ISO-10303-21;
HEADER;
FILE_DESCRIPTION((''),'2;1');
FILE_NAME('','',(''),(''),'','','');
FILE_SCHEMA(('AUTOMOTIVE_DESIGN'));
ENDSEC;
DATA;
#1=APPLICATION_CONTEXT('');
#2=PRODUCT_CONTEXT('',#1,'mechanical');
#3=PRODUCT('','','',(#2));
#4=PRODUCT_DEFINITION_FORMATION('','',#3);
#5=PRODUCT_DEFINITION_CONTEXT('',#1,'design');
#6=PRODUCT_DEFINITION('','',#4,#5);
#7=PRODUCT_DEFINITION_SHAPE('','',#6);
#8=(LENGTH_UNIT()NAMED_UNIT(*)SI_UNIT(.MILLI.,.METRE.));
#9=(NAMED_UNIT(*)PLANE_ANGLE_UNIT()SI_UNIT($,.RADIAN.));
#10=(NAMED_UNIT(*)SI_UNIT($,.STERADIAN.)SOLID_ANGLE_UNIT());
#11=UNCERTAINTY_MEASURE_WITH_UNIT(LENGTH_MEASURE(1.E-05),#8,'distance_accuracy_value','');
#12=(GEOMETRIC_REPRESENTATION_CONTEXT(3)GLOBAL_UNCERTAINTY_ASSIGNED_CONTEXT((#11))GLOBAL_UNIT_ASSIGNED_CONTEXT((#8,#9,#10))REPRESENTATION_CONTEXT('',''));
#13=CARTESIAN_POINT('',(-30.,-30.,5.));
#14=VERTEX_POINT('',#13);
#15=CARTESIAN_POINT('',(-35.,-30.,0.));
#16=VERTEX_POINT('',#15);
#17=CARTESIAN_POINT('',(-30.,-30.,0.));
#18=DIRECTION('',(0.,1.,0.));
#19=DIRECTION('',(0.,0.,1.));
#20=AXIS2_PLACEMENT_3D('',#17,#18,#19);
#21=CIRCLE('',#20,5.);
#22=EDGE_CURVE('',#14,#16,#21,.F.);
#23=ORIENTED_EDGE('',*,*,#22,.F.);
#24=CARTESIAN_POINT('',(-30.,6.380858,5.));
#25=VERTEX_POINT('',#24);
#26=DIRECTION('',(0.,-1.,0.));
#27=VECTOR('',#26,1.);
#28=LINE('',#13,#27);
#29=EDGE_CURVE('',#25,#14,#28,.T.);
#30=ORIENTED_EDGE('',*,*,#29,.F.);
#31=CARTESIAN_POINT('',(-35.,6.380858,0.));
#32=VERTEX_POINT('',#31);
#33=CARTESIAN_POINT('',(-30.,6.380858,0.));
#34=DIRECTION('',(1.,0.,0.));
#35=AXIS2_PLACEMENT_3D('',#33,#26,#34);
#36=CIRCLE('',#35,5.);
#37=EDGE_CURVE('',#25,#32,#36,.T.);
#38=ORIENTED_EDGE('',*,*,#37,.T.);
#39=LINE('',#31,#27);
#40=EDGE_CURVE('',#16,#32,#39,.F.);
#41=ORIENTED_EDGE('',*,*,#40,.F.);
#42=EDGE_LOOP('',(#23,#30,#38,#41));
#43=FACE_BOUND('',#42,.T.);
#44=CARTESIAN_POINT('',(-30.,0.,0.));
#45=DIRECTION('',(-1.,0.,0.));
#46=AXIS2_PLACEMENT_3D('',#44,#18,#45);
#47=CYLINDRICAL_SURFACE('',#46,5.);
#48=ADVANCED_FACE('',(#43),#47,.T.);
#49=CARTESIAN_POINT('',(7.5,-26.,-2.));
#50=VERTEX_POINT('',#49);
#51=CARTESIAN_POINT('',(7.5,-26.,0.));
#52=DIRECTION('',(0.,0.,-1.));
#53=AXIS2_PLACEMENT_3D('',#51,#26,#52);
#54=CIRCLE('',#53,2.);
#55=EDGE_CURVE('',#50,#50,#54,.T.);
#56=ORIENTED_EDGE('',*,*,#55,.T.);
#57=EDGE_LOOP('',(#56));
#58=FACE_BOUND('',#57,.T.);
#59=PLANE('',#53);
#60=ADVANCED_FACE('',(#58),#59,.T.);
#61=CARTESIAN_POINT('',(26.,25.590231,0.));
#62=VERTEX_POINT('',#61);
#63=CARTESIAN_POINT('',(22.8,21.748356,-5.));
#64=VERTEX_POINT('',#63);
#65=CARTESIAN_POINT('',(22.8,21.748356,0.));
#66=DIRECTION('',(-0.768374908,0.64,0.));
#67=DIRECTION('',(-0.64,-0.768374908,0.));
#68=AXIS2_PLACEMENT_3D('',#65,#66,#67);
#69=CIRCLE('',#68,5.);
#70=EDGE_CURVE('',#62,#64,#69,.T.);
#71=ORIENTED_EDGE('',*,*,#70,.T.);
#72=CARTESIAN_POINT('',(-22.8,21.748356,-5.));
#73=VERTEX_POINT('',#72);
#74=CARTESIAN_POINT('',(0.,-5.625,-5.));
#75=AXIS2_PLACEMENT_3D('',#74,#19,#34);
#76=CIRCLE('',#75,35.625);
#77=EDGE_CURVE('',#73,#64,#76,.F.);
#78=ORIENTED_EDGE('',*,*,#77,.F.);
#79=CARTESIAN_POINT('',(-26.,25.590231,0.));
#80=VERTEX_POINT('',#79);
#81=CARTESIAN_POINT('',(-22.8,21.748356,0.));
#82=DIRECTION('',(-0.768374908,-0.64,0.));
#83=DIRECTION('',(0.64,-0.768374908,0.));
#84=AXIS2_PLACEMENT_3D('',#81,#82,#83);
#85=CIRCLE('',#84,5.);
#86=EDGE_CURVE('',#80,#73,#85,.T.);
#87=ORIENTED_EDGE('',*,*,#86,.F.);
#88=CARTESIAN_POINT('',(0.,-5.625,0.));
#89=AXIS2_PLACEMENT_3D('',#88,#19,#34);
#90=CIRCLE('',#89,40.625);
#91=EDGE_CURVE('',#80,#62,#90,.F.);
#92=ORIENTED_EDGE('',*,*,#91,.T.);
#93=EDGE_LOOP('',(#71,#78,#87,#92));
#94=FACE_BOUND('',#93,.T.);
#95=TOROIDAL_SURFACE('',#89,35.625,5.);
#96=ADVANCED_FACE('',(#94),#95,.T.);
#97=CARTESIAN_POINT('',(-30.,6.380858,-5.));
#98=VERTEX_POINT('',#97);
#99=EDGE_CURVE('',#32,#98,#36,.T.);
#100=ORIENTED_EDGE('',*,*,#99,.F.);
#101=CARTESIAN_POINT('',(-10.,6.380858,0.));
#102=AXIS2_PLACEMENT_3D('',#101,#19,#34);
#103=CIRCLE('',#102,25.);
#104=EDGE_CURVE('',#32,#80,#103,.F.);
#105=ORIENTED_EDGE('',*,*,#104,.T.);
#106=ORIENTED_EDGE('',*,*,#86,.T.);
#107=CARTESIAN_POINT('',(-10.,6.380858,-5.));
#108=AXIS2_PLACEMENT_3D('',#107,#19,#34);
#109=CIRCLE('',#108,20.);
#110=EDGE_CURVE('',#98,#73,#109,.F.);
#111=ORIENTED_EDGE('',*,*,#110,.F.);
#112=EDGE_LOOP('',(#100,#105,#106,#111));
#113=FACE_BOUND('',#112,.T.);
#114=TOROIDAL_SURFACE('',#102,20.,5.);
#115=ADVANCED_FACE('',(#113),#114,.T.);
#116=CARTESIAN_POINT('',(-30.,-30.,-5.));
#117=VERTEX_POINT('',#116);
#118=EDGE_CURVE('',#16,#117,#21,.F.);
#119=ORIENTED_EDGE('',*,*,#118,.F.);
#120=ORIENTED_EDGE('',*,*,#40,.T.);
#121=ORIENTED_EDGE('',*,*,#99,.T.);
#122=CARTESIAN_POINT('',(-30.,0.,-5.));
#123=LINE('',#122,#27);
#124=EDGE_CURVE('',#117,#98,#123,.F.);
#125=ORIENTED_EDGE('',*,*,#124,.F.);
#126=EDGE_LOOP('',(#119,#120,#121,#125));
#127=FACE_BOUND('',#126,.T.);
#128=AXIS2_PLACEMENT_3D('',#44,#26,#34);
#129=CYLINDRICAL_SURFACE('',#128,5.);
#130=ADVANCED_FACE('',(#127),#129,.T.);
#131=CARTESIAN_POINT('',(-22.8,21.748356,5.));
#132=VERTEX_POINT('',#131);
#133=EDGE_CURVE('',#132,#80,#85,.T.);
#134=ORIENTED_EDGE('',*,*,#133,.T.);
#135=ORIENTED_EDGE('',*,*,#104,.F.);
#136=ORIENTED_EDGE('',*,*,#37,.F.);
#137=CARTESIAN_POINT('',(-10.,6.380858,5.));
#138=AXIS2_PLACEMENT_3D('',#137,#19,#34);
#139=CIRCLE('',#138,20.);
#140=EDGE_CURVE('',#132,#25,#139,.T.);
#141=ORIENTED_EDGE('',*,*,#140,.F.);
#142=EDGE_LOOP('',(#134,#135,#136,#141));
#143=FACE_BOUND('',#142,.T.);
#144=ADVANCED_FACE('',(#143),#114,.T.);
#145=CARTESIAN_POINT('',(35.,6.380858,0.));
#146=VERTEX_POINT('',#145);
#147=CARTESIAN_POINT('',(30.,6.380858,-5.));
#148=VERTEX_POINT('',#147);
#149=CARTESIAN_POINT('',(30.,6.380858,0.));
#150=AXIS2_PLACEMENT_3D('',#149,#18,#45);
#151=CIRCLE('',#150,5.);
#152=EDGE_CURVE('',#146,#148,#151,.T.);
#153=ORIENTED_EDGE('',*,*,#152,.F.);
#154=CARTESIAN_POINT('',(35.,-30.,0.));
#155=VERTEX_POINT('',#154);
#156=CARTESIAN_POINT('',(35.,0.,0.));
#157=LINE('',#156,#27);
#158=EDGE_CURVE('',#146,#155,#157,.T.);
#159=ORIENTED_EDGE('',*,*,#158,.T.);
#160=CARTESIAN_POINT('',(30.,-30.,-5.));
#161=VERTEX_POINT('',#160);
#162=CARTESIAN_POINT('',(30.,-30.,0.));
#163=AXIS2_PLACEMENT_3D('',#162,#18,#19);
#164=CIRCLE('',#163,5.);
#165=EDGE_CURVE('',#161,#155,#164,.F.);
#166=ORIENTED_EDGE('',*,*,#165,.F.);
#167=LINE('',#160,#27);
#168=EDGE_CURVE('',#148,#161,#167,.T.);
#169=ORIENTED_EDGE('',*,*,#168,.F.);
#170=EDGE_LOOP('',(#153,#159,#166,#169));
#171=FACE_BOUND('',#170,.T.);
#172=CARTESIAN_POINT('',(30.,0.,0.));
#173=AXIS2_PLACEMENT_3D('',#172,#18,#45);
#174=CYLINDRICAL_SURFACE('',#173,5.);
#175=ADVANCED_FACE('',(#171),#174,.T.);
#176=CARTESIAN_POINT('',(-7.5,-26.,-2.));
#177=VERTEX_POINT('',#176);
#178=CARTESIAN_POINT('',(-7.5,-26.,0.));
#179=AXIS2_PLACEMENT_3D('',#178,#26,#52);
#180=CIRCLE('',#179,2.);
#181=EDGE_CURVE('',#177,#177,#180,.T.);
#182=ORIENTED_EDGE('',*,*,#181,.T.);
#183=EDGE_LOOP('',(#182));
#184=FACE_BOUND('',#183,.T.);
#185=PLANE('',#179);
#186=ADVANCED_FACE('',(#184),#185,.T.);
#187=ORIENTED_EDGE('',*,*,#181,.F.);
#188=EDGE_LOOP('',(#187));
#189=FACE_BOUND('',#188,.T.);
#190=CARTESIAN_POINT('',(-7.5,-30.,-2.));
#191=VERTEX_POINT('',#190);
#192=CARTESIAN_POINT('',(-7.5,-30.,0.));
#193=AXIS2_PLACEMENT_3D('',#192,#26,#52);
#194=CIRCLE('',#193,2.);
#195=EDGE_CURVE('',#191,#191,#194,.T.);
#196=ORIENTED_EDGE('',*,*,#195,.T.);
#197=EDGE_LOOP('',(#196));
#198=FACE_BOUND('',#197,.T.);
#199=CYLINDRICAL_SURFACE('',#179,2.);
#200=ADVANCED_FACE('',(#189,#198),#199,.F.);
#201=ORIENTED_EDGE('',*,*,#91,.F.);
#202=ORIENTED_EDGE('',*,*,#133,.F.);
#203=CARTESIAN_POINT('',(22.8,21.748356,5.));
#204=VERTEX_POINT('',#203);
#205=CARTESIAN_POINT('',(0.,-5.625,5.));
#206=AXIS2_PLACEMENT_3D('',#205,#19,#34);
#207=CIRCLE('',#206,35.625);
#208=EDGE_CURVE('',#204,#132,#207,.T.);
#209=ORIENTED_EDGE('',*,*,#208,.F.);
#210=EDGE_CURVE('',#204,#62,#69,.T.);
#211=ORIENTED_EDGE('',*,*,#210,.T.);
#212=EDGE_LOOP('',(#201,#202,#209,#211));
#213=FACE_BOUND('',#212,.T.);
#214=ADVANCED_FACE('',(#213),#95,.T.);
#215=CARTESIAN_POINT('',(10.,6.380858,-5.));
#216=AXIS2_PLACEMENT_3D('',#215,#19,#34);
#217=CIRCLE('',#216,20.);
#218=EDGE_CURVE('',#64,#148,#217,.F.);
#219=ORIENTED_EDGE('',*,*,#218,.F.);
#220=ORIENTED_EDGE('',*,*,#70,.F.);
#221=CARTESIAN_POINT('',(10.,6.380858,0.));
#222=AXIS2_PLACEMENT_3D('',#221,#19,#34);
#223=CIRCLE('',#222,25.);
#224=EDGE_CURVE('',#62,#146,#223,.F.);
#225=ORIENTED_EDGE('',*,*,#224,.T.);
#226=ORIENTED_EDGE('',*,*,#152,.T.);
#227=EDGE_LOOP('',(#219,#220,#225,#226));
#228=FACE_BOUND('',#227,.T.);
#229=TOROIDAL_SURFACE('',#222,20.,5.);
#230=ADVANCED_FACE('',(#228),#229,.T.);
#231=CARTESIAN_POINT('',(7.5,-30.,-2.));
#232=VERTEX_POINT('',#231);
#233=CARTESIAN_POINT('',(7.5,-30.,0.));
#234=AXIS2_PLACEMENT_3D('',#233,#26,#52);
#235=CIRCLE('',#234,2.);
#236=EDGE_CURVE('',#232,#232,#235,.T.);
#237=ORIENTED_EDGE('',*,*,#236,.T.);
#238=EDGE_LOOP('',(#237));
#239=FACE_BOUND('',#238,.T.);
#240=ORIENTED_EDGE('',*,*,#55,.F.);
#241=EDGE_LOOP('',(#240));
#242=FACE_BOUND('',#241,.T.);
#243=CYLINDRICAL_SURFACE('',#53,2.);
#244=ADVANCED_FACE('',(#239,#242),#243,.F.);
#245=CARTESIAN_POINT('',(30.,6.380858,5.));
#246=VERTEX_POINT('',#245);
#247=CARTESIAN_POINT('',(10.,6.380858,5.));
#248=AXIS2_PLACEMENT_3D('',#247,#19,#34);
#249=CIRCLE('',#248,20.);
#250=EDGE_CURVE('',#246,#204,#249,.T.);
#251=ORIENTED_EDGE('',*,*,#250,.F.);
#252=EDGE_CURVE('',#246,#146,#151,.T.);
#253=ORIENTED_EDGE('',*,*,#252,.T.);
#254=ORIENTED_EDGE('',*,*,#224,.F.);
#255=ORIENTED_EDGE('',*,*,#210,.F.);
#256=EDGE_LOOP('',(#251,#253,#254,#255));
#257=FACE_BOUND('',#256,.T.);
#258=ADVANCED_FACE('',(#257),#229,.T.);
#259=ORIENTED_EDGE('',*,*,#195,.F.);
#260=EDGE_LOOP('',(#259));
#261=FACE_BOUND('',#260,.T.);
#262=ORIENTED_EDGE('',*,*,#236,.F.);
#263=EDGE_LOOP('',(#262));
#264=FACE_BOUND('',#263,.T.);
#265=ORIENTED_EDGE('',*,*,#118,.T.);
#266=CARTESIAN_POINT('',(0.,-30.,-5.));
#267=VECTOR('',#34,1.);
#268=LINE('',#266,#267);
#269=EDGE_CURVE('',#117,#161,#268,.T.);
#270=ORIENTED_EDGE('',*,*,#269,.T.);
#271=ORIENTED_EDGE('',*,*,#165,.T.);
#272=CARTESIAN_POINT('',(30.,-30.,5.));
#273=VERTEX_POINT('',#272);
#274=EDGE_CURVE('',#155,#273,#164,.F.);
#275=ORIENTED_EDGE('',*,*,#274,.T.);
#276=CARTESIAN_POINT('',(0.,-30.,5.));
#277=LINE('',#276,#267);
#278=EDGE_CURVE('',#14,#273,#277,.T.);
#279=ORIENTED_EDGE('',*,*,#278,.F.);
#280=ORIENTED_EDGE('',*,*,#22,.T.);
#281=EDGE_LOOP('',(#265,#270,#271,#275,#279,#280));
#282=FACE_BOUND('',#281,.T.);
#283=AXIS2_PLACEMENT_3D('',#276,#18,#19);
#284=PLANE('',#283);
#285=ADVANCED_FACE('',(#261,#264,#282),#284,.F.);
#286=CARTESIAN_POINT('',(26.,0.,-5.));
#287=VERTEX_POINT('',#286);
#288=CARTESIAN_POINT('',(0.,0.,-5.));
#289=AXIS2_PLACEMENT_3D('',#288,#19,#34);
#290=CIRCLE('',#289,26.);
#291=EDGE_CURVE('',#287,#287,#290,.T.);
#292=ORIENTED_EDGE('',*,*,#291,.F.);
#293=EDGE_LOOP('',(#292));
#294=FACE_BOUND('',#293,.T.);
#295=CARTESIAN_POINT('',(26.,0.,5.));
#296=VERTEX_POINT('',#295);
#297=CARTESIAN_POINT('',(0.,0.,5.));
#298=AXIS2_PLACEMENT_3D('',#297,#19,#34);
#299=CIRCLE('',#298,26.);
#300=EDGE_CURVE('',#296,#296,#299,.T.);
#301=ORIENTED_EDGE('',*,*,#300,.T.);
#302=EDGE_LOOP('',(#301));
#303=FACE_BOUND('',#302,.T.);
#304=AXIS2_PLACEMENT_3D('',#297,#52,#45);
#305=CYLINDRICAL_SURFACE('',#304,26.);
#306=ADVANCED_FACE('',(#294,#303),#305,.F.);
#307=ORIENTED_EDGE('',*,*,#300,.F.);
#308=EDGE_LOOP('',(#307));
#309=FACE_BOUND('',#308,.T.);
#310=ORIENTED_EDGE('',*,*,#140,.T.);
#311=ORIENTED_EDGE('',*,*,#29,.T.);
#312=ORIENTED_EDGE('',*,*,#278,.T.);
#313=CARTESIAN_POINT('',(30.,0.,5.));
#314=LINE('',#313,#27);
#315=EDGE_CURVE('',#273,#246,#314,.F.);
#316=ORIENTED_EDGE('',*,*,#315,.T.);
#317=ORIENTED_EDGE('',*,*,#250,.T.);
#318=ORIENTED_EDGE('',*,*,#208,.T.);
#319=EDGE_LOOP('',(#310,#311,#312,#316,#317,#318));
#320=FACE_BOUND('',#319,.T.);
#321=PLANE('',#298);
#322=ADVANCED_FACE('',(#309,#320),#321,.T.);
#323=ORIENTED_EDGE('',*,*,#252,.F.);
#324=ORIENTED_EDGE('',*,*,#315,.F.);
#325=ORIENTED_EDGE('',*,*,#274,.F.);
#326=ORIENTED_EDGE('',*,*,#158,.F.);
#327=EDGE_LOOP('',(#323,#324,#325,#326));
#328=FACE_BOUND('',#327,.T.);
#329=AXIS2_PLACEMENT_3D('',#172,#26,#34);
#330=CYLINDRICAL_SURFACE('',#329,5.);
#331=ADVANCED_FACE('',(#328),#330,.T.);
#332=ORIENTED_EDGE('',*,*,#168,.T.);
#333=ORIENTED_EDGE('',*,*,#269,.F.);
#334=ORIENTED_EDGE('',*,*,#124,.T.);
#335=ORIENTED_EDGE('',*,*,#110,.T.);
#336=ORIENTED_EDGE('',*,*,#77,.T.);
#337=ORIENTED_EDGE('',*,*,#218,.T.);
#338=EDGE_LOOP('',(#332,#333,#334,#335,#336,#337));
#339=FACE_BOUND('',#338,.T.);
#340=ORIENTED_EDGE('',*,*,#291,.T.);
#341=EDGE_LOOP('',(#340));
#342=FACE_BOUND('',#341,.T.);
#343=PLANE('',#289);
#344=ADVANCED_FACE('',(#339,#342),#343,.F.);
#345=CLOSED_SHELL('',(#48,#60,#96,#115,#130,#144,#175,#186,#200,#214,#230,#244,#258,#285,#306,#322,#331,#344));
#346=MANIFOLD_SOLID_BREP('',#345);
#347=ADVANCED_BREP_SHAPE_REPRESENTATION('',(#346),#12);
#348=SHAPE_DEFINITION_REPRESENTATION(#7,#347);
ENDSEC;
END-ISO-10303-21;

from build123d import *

# Parameters (mm, degrees)
SKETCH2_R           = 26
BOSS_EXTRUDE1_DEPTH = 5
FILLET3_R           = 25
SKETCH9_R           = 2
CUT_EXTRUDE2_DEPTH  = 4
FILLET5_R           = 5


with BuildPart() as part:
    # Sketch2 → Boss-Extrude1 (new, symmetric)
    with BuildSketch(Plane.XY):
        with BuildLine():
            Line((-35, 15), (-35, -30))
            Line((-35, -30), (35, -30))
            Line((35, -30), (35, 15))
            ThreePointArc((35, 15), (0, 35), (-35, 15))
        make_face()
        Circle(SKETCH2_R, mode=Mode.SUBTRACT)
    extrude(amount=BOSS_EXTRUDE1_DEPTH, both=True)

    # Fillet3
    fillet3_edges = [part.edges().sort_by_distance(p)[0] for p in [
        (35, 15, 0),
        (-35, 15, 0),
    ]]
    fillet(fillet3_edges, radius=FILLET3_R)

    # Sketch9 → Cut-Extrude2 (cut)
    with BuildSketch(Plane.XZ.offset(30)):
        with Locations(Location((-7.5, 0, 0), (0, 0, 270))):
            Circle(SKETCH9_R)
        with Locations(Location((7.5, 0, 0), (0, 0, 270))):
            Circle(SKETCH9_R)
    extrude(amount=-CUT_EXTRUDE2_DEPTH, mode=Mode.SUBTRACT)

    # Fillet5
    fillet5_edges = [part.edges().sort_by_distance(p)[0] for p in [
        (-35, -11.809571027, 5),
        (-35, -11.809571027, -5),
        (-32.638462845, 16.987459663, 5),
        (-32.638462845, 16.987459663, -5),
        (35, -11.809571027, -5),
        (35, -11.809571027, 5),
        (32.638462845, 16.987459663, 5),
        (32.638462845, 16.987459663, -5),
        (0, 35, 5),
        (0, 35, -5),
    ]]
    fillet(fillet5_edges, radius=FILLET5_R - 0.0001)  # a hair under: the kernel refuses the full size


solid = part.part
